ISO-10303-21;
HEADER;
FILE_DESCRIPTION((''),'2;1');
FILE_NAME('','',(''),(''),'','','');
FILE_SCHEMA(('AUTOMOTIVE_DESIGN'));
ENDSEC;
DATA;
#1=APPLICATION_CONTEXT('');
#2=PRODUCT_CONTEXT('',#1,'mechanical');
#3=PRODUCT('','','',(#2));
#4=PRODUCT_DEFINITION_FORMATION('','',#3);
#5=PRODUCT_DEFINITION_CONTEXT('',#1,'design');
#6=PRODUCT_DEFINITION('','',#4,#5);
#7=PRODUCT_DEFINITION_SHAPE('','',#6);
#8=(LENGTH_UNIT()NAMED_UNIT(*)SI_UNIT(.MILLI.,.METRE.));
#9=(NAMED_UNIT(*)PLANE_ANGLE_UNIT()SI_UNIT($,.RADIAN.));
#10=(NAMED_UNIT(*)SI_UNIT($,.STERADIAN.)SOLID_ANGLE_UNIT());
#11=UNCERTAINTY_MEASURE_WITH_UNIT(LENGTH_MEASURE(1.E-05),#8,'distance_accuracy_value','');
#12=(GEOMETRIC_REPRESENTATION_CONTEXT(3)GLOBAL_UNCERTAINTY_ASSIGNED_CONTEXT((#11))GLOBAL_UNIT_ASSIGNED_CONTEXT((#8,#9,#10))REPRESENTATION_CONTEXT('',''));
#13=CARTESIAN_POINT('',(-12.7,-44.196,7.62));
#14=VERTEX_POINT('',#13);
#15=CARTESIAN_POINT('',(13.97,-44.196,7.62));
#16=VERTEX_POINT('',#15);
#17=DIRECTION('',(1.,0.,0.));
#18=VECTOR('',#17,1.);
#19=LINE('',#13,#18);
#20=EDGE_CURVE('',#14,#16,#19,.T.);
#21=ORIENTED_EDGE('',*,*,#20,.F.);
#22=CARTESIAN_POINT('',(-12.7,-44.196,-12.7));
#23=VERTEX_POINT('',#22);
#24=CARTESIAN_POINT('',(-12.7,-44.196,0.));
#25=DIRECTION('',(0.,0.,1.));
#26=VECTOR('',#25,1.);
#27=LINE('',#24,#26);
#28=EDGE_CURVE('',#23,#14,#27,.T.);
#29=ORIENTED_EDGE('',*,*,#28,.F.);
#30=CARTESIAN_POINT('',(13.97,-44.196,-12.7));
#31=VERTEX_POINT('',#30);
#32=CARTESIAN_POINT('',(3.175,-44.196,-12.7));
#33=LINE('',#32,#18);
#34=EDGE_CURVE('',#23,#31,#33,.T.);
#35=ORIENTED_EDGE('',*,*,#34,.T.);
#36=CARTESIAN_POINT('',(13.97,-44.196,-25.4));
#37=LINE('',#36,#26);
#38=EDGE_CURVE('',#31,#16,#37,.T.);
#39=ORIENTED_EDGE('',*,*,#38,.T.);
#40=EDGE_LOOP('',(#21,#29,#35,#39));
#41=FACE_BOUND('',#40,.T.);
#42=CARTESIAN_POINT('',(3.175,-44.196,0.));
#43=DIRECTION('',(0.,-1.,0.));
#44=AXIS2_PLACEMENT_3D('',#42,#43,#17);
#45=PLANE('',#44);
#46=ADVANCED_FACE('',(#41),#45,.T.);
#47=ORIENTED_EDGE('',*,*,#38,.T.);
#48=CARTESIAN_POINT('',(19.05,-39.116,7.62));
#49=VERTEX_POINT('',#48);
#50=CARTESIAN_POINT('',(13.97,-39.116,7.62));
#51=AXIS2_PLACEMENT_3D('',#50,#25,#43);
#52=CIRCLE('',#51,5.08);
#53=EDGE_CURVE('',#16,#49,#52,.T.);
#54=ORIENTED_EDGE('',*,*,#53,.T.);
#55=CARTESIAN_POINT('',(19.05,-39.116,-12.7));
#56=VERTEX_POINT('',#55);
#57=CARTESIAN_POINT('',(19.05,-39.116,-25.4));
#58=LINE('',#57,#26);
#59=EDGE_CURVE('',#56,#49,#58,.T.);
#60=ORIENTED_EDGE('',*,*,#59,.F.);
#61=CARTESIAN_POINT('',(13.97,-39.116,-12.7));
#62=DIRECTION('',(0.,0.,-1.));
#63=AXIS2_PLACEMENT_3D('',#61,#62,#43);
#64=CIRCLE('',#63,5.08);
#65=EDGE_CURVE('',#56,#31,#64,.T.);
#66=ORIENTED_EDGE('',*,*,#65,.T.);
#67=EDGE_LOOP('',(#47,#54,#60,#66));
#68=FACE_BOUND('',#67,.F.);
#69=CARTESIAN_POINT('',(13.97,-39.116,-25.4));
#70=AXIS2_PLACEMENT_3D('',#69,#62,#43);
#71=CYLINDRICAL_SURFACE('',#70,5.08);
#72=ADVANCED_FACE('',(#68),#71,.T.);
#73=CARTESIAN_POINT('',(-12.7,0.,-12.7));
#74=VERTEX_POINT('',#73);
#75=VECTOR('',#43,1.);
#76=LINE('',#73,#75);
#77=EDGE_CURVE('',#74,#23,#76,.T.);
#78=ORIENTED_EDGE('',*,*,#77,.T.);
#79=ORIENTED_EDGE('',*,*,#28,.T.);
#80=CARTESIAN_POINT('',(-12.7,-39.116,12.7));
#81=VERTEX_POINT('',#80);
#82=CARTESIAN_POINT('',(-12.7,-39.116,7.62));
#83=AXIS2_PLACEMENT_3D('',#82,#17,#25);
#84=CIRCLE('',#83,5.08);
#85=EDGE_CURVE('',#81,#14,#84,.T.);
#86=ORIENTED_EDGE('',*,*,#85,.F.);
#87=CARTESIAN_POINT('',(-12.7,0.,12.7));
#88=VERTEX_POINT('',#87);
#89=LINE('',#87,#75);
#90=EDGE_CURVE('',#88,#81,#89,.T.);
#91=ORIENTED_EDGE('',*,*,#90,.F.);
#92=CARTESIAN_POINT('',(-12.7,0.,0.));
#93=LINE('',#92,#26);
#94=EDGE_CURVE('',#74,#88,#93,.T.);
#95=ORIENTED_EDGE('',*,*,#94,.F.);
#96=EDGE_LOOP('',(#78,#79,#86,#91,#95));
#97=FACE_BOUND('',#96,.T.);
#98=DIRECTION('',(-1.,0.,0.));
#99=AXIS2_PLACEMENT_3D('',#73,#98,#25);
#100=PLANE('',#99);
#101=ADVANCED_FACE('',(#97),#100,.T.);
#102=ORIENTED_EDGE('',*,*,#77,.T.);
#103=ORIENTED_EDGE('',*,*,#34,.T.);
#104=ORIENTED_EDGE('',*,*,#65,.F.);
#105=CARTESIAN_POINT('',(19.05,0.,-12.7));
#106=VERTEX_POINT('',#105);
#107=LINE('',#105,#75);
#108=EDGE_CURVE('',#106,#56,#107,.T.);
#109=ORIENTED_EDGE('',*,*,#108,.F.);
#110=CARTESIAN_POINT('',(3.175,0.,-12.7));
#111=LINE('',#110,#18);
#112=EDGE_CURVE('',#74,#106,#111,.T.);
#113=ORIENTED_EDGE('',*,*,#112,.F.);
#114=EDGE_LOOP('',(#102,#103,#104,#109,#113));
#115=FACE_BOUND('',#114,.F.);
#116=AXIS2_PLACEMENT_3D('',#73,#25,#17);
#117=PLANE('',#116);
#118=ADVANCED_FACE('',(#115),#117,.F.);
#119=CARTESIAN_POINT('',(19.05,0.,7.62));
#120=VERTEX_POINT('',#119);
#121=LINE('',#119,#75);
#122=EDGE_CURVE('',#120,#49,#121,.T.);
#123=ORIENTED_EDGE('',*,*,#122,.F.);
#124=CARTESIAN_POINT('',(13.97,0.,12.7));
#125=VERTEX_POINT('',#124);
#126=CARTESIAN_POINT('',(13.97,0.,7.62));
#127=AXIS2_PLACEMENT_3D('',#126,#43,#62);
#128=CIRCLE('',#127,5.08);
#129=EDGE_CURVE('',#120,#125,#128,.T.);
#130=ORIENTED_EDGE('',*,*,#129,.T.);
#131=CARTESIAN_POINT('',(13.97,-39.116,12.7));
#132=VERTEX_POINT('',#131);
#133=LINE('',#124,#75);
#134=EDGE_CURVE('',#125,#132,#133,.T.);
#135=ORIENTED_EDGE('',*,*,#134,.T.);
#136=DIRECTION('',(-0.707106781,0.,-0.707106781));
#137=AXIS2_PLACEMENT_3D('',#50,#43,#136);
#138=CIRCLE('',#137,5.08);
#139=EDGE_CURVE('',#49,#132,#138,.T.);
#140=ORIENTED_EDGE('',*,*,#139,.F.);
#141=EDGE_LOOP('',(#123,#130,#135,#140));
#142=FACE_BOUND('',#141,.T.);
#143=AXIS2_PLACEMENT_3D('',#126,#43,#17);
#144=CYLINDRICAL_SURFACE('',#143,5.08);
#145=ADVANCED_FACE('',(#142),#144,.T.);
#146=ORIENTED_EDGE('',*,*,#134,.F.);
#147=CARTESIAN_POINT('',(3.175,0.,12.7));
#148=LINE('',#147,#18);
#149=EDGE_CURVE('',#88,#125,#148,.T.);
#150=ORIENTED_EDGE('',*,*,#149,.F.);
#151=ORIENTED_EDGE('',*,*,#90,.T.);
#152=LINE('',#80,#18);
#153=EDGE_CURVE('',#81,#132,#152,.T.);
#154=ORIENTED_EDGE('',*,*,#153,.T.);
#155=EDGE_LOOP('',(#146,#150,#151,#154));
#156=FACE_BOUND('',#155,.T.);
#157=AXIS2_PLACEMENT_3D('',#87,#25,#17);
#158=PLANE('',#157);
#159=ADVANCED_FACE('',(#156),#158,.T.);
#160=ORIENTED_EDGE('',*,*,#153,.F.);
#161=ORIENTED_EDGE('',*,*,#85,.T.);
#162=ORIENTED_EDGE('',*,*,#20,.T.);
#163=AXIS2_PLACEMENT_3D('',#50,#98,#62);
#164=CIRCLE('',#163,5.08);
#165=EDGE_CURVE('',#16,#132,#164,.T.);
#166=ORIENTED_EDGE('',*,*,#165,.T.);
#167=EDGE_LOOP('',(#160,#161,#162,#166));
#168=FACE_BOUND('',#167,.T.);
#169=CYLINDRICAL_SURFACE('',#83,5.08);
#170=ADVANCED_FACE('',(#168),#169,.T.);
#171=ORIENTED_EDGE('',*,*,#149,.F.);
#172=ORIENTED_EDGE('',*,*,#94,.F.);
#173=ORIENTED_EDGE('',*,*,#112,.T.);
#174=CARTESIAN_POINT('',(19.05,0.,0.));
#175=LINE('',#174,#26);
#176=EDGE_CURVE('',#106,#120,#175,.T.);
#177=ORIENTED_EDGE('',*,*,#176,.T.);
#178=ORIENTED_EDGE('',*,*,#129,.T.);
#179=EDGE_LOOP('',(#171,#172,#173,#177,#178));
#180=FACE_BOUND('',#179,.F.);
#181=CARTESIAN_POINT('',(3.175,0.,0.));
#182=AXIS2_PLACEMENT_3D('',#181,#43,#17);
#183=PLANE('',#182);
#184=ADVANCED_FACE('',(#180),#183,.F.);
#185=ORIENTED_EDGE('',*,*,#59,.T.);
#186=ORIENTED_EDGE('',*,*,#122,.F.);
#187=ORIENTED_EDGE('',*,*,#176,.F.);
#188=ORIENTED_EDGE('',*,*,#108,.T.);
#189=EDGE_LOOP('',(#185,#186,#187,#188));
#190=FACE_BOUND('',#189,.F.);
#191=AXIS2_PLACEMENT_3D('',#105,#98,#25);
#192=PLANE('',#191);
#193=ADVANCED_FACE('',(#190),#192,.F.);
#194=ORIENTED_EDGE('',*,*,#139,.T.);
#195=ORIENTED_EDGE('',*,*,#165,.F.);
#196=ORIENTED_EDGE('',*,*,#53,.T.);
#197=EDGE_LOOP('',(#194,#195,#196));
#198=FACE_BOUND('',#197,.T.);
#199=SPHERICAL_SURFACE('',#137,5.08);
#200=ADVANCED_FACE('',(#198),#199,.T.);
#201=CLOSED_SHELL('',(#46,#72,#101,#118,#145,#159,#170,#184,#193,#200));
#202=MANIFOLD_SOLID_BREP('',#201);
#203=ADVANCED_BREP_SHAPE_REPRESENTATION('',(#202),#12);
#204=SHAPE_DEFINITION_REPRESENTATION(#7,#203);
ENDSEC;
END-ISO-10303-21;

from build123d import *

# Parameters (mm, degrees)
F0_W        = 31.75
F0_H        = 25.4
F1_DEPTH    = 44.196
F2_R        = 5.08
F3_T1_DEPTH = 33.02
F3_S5_W     = 5.08
F3_S5_H     = 5.08
F3_T6_DEPTH = 5.08


# Not quite as in the source:
# - a fillet or chamfer that OpenCascade refuses, or shapes differently, is made with other operations: its cross-section is extruded or revolved along the edge and cut away or added


with BuildPart() as f1:
    # F0 (on Front) → F1 (new body)
    with BuildSketch(Plane.XZ):
        with Locations((3.175, 0)):
            Rectangle(F0_W, F0_H)
    extrude(amount=F1_DEPTH)

    # F2
    f2_edges = [f1.edges().sort_by_distance(p)[0] for p in [
        (3.175, -44.196, 12.7),
        (19.05, -22.098, 12.7),
    ]]
    fillet(f2_edges, radius=F2_R)

    # F3: fillet of radius 5.08 on 1 edges, made by hand

    # F3_s2 → F3_t1 (cut)
    with BuildSketch(Plane.XY.offset(-25.4)):
        with BuildLine():
            ThreePointArc((13.97, -44.196), (17.5621024484, -42.7081024484), (19.05, -39.116))
            Line((19.05, -39.116), (19.05, -44.196))
            Line((19.05, -44.196), (13.97, -44.196))
        make_face()
    extrude(amount=F3_T1_DEPTH, mode=Mode.SUBTRACT)


with BuildPart() as f3_tool4:
    # F3_s5 → F3_t6 (new body)
    with BuildSketch(Plane.XZ.offset(39.116)):
        with Locations((16.51, 10.16)):
            Rectangle(F3_S5_W, F3_S5_H)
    extrude(amount=F3_T6_DEPTH)

    # F3_s7 → F3_t8 (revolve, cut)
    with BuildSketch(Plane(origin=(13.97, -39.116, 7.62), x_dir=(-0.7071067812, 0, -0.7071067812), z_dir=(-0.7071067812, 0, 0.7071067812))):
        with BuildLine():
            ThreePointArc((0, -5.08), (5.08, 0), (0, 5.08))
            Line((0, 5.08), (0, -5.08))
        make_face()
    revolve(axis=Axis((13.97, -39.116, 7.62), (0, -1, 0)), mode=Mode.SUBTRACT)


with BuildPart() as f1_1:
    add(f1.part)

    # F3_t3: cut F3_tool4
    add(f3_tool4.part, mode=Mode.SUBTRACT)


solid = f1_1.part
